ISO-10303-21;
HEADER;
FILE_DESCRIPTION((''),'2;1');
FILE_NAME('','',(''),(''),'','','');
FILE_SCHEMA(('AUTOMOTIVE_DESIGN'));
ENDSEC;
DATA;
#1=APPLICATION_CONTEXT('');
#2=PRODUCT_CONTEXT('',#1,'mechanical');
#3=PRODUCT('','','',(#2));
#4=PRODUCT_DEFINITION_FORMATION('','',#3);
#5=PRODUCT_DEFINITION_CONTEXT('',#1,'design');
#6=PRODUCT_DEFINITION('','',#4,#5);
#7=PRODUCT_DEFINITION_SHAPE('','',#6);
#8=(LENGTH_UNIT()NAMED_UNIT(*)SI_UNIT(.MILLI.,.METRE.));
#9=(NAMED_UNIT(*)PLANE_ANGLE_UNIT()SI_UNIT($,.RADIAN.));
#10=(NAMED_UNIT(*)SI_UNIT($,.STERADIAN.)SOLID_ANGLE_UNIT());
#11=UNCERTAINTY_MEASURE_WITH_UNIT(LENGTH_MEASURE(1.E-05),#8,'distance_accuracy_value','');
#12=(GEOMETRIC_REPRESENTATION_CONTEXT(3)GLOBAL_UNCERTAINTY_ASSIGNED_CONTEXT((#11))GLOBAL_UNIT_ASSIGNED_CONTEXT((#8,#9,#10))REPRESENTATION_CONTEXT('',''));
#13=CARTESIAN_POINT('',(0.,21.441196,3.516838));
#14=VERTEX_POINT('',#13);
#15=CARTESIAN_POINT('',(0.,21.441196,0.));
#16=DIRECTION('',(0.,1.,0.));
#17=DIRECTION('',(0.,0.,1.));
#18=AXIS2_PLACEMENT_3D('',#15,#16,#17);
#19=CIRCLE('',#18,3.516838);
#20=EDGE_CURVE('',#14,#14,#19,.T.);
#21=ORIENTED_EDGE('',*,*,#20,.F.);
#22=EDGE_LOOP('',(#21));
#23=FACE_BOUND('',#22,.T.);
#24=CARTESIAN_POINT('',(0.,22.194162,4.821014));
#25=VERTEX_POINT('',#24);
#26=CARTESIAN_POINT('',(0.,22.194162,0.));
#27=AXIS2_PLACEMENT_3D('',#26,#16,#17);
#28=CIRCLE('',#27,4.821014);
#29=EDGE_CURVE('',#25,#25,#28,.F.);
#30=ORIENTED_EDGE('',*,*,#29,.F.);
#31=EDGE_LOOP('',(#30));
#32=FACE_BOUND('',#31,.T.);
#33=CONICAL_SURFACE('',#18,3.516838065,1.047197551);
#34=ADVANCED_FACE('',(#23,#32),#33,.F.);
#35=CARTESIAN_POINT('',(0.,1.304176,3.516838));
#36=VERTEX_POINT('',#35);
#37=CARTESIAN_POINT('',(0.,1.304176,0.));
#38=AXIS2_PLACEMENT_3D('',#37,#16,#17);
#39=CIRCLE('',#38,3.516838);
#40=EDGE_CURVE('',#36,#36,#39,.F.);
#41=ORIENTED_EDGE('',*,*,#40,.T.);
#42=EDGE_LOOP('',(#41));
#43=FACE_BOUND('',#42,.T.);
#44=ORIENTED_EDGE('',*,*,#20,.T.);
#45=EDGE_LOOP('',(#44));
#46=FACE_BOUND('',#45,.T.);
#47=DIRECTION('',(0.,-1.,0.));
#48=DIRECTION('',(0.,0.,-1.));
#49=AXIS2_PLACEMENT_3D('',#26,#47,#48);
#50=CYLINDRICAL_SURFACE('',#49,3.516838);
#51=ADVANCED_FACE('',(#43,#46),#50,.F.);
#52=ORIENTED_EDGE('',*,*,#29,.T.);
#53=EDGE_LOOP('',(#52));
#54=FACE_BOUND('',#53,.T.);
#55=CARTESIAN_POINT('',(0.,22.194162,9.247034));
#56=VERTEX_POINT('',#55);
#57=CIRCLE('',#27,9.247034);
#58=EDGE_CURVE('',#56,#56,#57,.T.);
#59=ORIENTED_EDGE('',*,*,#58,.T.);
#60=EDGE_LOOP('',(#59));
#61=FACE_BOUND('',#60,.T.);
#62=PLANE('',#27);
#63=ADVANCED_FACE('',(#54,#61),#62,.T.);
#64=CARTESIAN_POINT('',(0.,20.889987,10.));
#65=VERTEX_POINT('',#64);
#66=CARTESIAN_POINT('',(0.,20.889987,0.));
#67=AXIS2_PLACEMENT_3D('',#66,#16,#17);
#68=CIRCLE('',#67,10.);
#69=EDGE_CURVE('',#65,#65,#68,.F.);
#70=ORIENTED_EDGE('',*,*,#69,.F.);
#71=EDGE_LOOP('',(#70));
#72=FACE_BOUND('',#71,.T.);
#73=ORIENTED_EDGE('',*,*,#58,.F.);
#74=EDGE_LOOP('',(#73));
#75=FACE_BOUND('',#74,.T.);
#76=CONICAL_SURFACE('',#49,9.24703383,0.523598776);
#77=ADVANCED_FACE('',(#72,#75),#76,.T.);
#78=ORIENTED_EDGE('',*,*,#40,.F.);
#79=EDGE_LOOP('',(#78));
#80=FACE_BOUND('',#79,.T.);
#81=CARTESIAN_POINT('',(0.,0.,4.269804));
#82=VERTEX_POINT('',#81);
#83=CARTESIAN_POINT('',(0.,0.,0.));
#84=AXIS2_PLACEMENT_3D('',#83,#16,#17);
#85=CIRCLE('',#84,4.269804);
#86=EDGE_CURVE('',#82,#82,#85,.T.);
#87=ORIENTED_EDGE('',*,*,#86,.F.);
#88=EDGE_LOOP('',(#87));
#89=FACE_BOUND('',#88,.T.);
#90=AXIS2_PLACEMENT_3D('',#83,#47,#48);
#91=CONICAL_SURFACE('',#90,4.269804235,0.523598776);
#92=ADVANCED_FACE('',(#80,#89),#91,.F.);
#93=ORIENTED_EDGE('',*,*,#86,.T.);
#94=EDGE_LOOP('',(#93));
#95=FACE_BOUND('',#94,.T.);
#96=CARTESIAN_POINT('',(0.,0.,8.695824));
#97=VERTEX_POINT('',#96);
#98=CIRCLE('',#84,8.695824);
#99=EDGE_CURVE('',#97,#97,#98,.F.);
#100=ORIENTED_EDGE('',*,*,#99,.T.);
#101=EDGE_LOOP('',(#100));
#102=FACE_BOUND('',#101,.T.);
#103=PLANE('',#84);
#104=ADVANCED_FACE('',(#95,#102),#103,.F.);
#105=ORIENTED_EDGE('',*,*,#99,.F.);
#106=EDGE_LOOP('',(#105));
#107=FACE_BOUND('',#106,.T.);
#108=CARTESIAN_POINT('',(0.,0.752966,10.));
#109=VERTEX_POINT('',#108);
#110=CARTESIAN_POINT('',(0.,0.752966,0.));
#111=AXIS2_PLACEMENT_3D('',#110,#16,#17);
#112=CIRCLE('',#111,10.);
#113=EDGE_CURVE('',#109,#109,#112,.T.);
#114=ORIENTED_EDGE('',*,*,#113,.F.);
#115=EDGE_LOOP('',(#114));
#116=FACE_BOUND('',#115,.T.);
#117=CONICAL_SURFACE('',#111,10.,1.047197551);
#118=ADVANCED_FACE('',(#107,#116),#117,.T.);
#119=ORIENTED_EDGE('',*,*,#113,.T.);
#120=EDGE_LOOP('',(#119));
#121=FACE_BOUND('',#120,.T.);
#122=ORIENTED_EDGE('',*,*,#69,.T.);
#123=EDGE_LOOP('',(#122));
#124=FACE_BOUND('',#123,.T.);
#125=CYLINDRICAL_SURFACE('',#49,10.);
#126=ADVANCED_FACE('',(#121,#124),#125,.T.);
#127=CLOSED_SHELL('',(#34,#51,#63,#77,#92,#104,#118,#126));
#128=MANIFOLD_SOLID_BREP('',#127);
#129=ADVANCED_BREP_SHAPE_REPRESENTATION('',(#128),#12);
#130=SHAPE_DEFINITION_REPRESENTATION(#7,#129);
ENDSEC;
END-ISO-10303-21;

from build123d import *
from OCP.BRepFilletAPI import BRepFilletAPI_MakeChamfer

# Parameters (mm, degrees)
SKETCH1_R           = 10
BOSS_EXTRUDE1_DEPTH = 22.194162263
SKETCH2_R           = 3.516838065
CUT_EXTRUDE1_DEPTH  = 27.316930645
CHAMFER1_SIZE       = 1.304175663
CHAMFER1_SIZE2      = 0.75296617


with BuildPart() as part:
    # Sketch1 → Boss-Extrude1 (new body)
    with BuildSketch(Plane(origin=(0, 0, 0), x_dir=(1, 0, 0), z_dir=(0, 1, 0))):
        Circle(SKETCH1_R)
    extrude(amount=BOSS_EXTRUDE1_DEPTH)

    # Sketch2 → Cut-Extrude1 (cut, through all)
    with BuildSketch(Plane(origin=(0, 0, 0), x_dir=(1, 0, 0), z_dir=(0, 1, 0))):
        Circle(SKETCH2_R)
    extrude(amount=CUT_EXTRUDE1_DEPTH, mode=Mode.SUBTRACT)

    # Chamfer1: one chamfer whose edges measure the first distance from different faces: ONE call of the kernel's chamfer builder (chamfer() names one face for all edges)
    chamfer1_edges_1 = [part.edges().sort_by_distance(p)[0] for p in [
        (-3.516838065, 22.194162263, 0),
    ]]
    chamfer1_side_1 = [part.faces().sort_by_distance(p)[0] for p in [
        (-9.717157288, 22.194162263, 0),
    ]]
    chamfer1_edges_2 = [part.edges().sort_by_distance(p)[0] for p in [
        (-3.516838065, 0, 0),
    ]]
    chamfer1_side_2 = [part.faces().sort_by_distance(p)[0] for p in [
        (-3.516838065, 11.097081132, 0),
    ]]
    chamfer1_edges_3 = [part.edges().sort_by_distance(p)[0] for p in [
        (-10, 0, 0),
    ]]
    chamfer1_side_3 = [part.faces().sort_by_distance(p)[0] for p in [
        (-9.717157288, 0, 0),
    ]]
    chamfer1_edges_4 = [part.edges().sort_by_distance(p)[0] for p in [
        (-10, 22.194162263, 0),
    ]]
    chamfer1_side_4 = [part.faces().sort_by_distance(p)[0] for p in [
        (-10, 11.097081132, 0),
    ]]
    chamfer1 = BRepFilletAPI_MakeChamfer(part.part.solid().wrapped)
    for e in chamfer1_edges_1:
        chamfer1.Add(CHAMFER1_SIZE, CHAMFER1_SIZE2, e.wrapped, chamfer1_side_1[0].wrapped)  # the first distance lies on this face
    for e in chamfer1_edges_2:
        chamfer1.Add(CHAMFER1_SIZE, CHAMFER1_SIZE2, e.wrapped, chamfer1_side_2[0].wrapped)  # the first distance lies on this face
    for e in chamfer1_edges_3:
        chamfer1.Add(CHAMFER1_SIZE, CHAMFER1_SIZE2, e.wrapped, chamfer1_side_3[0].wrapped)  # the first distance lies on this face
    for e in chamfer1_edges_4:
        chamfer1.Add(CHAMFER1_SIZE, CHAMFER1_SIZE2, e.wrapped, chamfer1_side_4[0].wrapped)  # the first distance lies on this face
    add(Compound.cast(chamfer1.Shape()), mode=Mode.REPLACE)


solid = part.part
